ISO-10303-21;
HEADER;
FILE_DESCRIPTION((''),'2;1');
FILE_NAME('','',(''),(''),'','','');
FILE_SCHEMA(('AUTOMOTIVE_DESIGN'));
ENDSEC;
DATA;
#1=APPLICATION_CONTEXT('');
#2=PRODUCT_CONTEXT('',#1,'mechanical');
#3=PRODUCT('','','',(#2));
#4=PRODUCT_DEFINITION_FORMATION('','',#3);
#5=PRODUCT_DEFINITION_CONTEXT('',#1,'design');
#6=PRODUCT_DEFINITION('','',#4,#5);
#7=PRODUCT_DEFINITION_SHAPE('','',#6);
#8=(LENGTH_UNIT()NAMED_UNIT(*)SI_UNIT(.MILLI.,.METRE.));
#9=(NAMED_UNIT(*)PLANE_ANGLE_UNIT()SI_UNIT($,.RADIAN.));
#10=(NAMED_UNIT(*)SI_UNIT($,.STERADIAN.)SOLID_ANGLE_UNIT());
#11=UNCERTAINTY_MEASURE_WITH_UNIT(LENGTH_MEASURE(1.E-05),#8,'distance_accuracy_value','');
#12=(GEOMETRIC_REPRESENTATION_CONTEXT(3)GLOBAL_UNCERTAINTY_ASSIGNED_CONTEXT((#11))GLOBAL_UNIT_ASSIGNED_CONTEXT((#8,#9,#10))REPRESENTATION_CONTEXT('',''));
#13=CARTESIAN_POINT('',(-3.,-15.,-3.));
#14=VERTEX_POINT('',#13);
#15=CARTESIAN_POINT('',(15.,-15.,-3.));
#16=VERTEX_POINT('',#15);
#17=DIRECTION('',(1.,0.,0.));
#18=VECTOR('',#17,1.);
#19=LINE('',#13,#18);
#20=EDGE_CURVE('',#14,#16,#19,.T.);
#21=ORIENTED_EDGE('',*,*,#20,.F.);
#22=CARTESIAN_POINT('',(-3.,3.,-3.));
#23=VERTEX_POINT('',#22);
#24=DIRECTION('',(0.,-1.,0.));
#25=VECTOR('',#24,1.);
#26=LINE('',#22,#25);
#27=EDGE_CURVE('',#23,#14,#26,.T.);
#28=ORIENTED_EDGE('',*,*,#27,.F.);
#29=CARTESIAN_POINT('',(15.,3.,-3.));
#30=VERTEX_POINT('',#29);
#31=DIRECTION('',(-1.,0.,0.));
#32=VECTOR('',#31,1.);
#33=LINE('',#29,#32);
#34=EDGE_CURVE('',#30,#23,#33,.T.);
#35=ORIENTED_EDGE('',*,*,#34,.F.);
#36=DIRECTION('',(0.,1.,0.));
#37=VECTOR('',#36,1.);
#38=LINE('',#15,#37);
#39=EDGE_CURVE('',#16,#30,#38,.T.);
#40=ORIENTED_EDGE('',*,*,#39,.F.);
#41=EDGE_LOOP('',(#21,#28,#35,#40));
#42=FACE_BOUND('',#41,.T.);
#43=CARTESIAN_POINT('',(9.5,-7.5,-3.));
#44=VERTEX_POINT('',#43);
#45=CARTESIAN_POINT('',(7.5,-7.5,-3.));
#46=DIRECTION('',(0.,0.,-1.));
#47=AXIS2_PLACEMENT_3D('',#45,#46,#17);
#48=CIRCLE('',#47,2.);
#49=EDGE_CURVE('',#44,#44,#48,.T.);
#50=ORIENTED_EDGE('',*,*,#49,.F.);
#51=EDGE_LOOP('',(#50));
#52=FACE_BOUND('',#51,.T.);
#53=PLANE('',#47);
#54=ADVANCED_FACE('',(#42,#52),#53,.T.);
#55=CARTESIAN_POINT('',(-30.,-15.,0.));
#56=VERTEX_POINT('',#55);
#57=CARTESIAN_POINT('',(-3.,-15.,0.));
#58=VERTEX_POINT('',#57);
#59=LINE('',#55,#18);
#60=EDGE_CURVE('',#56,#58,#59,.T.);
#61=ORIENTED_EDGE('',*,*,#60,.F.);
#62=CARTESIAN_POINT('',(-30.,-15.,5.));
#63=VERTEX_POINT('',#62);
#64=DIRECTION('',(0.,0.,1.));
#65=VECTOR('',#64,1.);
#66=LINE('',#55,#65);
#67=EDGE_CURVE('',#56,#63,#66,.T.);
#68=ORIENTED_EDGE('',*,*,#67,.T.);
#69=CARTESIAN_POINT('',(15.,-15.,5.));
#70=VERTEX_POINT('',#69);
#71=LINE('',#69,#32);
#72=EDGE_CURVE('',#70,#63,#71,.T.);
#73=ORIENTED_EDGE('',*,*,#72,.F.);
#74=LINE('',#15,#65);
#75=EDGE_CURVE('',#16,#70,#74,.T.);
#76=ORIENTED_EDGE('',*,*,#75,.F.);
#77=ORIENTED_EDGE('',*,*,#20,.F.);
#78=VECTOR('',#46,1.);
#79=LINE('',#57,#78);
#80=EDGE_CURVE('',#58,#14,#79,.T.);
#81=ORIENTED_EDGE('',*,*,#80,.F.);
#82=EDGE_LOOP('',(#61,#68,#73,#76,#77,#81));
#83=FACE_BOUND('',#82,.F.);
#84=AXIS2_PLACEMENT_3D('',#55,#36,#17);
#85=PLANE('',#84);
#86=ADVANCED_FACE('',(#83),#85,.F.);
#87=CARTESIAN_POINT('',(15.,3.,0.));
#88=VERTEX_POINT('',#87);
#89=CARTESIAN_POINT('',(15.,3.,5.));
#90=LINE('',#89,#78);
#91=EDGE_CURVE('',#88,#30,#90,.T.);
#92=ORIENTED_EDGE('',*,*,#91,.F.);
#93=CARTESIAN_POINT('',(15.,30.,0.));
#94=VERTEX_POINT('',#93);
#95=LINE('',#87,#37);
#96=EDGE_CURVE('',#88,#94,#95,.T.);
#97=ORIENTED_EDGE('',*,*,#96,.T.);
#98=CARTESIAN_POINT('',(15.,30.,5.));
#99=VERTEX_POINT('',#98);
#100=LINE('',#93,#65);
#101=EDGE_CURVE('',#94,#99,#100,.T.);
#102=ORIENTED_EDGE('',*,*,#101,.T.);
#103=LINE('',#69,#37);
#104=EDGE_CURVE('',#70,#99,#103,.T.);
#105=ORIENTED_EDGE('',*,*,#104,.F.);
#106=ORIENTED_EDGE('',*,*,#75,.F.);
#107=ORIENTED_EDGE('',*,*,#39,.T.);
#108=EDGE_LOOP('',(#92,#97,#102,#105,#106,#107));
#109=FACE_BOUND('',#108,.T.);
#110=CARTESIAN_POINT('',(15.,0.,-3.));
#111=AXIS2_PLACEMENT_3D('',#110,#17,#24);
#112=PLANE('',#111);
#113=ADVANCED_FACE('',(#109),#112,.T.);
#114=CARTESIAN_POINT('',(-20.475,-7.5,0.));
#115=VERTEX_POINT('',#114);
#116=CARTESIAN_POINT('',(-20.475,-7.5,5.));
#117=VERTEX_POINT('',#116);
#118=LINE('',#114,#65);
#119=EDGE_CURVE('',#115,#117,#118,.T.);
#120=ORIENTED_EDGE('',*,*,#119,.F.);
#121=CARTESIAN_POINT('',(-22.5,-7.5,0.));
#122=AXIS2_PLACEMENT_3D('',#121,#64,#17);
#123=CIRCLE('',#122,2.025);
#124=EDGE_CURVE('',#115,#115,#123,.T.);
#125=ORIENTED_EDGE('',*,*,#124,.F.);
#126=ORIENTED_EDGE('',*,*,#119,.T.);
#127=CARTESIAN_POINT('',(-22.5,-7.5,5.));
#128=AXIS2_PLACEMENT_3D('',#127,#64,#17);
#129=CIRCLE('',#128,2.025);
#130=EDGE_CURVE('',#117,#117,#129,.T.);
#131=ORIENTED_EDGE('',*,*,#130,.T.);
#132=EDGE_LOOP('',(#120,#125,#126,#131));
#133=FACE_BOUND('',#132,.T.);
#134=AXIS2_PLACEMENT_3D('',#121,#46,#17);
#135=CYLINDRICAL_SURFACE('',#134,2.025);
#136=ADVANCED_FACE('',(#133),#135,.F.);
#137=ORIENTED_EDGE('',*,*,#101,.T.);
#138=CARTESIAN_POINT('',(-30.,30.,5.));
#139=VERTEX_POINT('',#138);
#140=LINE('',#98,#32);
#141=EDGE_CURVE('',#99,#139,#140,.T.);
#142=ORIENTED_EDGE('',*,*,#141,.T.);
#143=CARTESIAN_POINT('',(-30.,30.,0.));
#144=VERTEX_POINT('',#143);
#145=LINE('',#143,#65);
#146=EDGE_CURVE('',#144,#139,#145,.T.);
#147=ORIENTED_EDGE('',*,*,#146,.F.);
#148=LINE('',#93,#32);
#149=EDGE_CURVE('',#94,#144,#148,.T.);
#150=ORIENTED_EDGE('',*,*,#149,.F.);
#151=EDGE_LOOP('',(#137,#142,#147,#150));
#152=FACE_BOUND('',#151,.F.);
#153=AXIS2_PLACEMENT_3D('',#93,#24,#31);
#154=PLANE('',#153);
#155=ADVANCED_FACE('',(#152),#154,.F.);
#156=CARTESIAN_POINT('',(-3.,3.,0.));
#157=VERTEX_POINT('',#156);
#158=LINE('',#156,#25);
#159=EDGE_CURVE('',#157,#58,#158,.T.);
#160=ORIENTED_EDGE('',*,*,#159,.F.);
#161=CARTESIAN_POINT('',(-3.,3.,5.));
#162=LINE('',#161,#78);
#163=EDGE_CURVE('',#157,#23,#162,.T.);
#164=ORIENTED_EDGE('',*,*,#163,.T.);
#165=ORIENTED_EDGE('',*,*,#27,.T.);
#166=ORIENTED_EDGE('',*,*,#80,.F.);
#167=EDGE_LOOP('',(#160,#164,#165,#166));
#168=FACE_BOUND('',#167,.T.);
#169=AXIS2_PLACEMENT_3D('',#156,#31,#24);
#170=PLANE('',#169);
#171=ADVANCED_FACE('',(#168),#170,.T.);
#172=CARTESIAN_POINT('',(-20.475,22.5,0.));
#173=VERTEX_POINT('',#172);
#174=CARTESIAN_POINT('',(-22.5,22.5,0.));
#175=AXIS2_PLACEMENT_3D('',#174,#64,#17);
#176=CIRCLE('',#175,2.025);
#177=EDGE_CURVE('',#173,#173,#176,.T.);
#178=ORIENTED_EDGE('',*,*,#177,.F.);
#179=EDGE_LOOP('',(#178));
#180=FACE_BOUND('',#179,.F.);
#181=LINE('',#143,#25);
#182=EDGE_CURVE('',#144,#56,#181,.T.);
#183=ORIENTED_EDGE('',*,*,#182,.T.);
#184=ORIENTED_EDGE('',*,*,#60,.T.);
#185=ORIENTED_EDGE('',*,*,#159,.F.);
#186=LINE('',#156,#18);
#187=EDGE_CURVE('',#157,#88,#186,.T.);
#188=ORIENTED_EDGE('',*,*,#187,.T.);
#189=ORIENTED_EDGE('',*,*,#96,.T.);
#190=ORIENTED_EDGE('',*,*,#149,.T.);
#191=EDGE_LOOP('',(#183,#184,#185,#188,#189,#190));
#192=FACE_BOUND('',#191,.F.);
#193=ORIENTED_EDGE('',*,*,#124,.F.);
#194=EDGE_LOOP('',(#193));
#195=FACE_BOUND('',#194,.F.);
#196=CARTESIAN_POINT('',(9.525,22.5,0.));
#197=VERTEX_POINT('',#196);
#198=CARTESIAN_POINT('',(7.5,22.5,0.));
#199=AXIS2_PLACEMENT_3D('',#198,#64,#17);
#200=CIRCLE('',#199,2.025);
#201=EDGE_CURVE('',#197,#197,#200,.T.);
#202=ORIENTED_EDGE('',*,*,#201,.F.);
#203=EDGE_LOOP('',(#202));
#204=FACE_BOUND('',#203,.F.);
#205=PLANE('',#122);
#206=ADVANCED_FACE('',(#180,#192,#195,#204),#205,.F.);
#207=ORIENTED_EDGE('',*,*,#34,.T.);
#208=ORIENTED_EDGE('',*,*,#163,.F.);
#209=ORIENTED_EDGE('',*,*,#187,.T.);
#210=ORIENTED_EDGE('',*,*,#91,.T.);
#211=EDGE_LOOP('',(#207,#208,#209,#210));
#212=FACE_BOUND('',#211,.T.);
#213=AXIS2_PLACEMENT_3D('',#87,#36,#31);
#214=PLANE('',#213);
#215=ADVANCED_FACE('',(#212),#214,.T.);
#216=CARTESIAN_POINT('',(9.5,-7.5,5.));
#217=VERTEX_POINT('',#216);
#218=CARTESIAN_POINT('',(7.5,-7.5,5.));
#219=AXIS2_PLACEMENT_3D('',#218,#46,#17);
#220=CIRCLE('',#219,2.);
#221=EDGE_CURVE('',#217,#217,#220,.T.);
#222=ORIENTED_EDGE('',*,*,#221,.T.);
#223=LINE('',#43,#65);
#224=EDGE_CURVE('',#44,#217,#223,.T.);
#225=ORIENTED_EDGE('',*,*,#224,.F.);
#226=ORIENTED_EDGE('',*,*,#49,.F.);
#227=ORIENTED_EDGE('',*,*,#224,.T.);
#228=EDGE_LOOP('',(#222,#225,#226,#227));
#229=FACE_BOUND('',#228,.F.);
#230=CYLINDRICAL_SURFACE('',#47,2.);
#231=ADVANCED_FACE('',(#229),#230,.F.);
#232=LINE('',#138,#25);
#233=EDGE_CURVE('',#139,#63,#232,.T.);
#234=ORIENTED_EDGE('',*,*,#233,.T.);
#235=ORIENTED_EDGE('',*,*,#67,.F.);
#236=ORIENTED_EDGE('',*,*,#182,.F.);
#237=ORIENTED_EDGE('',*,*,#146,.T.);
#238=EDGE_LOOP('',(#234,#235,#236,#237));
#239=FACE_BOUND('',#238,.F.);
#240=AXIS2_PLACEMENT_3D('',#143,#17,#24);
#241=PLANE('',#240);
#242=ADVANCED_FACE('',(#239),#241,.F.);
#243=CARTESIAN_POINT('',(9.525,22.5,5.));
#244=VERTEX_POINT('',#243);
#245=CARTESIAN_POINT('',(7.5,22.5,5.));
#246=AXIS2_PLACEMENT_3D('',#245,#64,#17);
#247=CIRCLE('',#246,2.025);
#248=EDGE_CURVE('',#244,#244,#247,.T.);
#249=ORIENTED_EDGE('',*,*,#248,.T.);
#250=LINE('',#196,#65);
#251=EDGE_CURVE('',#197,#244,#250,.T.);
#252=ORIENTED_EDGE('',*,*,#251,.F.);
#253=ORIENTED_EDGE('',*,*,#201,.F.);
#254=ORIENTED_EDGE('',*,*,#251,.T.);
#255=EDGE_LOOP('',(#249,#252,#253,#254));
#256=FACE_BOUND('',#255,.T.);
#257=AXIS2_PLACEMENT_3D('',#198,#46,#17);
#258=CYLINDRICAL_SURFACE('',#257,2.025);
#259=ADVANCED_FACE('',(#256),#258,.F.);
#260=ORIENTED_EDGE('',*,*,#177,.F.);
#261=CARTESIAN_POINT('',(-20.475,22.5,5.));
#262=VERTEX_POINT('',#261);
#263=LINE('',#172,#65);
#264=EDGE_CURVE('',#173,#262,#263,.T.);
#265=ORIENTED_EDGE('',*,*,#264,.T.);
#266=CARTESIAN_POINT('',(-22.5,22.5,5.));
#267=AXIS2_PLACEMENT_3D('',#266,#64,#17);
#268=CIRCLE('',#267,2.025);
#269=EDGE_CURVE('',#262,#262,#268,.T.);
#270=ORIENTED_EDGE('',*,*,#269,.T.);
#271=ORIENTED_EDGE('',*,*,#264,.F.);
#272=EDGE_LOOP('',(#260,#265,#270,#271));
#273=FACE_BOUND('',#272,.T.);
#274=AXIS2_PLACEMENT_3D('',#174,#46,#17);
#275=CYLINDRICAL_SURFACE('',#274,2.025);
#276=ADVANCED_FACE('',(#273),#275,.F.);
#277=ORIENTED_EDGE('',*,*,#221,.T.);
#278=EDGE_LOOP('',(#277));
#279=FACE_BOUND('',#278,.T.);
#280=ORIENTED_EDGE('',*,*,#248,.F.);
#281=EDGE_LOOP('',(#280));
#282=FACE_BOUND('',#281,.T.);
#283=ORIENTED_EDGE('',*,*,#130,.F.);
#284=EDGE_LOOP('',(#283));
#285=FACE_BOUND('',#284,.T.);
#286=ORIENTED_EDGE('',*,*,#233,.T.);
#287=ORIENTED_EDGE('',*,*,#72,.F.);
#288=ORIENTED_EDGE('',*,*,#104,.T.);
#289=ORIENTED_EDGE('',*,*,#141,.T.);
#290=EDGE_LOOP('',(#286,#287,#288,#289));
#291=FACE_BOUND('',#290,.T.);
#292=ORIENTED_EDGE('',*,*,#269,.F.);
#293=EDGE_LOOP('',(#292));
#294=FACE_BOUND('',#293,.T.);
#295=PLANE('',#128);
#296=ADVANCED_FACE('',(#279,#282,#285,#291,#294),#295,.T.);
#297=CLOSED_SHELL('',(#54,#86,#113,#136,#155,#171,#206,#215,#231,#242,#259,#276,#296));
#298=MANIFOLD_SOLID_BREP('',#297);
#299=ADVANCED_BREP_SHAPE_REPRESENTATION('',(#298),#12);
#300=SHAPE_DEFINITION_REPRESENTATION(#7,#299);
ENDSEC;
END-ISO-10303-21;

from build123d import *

# Parameters (mm, degrees)
F0_W     = 12
F0_H     = 15
F0_W_2   = 3
F1_DEPTH = 5
F2_DEPTH = 3
F3_W     = 15
F3_H     = 15
F3_R     = 2
F4_DEPTH = 8
F0_W_3   = 15
F0_R     = 2.025
F5_DEPTH = 5


# Not quite as in the source:
# - a feature names something its author has since deleted; it is built from what else it names


with BuildPart() as f1:
    # F0 (on Top) → F1 (new body)
    with BuildSketch(Plane.XY):
        with Locations((-9, -7.5)):
            Rectangle(F0_W, F0_H)
        with Locations((-1.5, -7.5)):
            Rectangle(F0_W_2, F0_H)
        Polygon((-3, 3), (-3, 0), (0, 0), (15, 0), (15, 3), align=None)
    extrude(amount=F1_DEPTH)

    # F0 (on Top) → F2 (join)
    with BuildSketch(Plane.XY):
        with Locations((-1.5, -7.5)):
            Rectangle(F0_W_2, F0_H)
        Polygon((-3, 3), (-3, 0), (0, 0), (15, 0), (15, 3), align=None)
    extrude(amount=-F2_DEPTH)

    # F3 (on face) → F4 (join)
    with BuildSketch(Plane(origin=(0, 0, -3), x_dir=(1, 0, 0), z_dir=(0, 0, -1))):
        with Locations((7.5, 7.5)):
            Rectangle(F3_W, F3_H)
        with Locations((7.5, 7.5)):
            Circle(F3_R, mode=Mode.SUBTRACT)
    extrude(amount=-F4_DEPTH)

    # F0 (on Top) → F5 (join)
    with BuildSketch(Plane.XY):
        with Locations((-22.5, -7.5)):
            Rectangle(F0_W_3, F0_H)
        with Locations((-22.5, -7.5)):
            Circle(F0_R, mode=Mode.SUBTRACT)
        with Locations((-22.5, 7.5)):
            Rectangle(F0_W_3, F0_H)
        Polygon((0, 15), (-15, 15), (-15, 0), (-3, 0), (-3, 3), (15, 3), (15, 15), align=None)
        with Locations((-7.5, 22.5)):
            Rectangle(F0_W_3, F0_H)
        with Locations((7.5, 22.5)):
            Rectangle(F0_W_3, F0_H)
        with Locations((7.5, 22.5)):
            Circle(F0_R, mode=Mode.SUBTRACT)
        with Locations((-22.5, 22.5)):
            Rectangle(F0_W_3, F0_H)
        with Locations((-22.5, 22.5)):
            Circle(F0_R, mode=Mode.SUBTRACT)
    extrude(amount=F5_DEPTH)


solid = f1.part
